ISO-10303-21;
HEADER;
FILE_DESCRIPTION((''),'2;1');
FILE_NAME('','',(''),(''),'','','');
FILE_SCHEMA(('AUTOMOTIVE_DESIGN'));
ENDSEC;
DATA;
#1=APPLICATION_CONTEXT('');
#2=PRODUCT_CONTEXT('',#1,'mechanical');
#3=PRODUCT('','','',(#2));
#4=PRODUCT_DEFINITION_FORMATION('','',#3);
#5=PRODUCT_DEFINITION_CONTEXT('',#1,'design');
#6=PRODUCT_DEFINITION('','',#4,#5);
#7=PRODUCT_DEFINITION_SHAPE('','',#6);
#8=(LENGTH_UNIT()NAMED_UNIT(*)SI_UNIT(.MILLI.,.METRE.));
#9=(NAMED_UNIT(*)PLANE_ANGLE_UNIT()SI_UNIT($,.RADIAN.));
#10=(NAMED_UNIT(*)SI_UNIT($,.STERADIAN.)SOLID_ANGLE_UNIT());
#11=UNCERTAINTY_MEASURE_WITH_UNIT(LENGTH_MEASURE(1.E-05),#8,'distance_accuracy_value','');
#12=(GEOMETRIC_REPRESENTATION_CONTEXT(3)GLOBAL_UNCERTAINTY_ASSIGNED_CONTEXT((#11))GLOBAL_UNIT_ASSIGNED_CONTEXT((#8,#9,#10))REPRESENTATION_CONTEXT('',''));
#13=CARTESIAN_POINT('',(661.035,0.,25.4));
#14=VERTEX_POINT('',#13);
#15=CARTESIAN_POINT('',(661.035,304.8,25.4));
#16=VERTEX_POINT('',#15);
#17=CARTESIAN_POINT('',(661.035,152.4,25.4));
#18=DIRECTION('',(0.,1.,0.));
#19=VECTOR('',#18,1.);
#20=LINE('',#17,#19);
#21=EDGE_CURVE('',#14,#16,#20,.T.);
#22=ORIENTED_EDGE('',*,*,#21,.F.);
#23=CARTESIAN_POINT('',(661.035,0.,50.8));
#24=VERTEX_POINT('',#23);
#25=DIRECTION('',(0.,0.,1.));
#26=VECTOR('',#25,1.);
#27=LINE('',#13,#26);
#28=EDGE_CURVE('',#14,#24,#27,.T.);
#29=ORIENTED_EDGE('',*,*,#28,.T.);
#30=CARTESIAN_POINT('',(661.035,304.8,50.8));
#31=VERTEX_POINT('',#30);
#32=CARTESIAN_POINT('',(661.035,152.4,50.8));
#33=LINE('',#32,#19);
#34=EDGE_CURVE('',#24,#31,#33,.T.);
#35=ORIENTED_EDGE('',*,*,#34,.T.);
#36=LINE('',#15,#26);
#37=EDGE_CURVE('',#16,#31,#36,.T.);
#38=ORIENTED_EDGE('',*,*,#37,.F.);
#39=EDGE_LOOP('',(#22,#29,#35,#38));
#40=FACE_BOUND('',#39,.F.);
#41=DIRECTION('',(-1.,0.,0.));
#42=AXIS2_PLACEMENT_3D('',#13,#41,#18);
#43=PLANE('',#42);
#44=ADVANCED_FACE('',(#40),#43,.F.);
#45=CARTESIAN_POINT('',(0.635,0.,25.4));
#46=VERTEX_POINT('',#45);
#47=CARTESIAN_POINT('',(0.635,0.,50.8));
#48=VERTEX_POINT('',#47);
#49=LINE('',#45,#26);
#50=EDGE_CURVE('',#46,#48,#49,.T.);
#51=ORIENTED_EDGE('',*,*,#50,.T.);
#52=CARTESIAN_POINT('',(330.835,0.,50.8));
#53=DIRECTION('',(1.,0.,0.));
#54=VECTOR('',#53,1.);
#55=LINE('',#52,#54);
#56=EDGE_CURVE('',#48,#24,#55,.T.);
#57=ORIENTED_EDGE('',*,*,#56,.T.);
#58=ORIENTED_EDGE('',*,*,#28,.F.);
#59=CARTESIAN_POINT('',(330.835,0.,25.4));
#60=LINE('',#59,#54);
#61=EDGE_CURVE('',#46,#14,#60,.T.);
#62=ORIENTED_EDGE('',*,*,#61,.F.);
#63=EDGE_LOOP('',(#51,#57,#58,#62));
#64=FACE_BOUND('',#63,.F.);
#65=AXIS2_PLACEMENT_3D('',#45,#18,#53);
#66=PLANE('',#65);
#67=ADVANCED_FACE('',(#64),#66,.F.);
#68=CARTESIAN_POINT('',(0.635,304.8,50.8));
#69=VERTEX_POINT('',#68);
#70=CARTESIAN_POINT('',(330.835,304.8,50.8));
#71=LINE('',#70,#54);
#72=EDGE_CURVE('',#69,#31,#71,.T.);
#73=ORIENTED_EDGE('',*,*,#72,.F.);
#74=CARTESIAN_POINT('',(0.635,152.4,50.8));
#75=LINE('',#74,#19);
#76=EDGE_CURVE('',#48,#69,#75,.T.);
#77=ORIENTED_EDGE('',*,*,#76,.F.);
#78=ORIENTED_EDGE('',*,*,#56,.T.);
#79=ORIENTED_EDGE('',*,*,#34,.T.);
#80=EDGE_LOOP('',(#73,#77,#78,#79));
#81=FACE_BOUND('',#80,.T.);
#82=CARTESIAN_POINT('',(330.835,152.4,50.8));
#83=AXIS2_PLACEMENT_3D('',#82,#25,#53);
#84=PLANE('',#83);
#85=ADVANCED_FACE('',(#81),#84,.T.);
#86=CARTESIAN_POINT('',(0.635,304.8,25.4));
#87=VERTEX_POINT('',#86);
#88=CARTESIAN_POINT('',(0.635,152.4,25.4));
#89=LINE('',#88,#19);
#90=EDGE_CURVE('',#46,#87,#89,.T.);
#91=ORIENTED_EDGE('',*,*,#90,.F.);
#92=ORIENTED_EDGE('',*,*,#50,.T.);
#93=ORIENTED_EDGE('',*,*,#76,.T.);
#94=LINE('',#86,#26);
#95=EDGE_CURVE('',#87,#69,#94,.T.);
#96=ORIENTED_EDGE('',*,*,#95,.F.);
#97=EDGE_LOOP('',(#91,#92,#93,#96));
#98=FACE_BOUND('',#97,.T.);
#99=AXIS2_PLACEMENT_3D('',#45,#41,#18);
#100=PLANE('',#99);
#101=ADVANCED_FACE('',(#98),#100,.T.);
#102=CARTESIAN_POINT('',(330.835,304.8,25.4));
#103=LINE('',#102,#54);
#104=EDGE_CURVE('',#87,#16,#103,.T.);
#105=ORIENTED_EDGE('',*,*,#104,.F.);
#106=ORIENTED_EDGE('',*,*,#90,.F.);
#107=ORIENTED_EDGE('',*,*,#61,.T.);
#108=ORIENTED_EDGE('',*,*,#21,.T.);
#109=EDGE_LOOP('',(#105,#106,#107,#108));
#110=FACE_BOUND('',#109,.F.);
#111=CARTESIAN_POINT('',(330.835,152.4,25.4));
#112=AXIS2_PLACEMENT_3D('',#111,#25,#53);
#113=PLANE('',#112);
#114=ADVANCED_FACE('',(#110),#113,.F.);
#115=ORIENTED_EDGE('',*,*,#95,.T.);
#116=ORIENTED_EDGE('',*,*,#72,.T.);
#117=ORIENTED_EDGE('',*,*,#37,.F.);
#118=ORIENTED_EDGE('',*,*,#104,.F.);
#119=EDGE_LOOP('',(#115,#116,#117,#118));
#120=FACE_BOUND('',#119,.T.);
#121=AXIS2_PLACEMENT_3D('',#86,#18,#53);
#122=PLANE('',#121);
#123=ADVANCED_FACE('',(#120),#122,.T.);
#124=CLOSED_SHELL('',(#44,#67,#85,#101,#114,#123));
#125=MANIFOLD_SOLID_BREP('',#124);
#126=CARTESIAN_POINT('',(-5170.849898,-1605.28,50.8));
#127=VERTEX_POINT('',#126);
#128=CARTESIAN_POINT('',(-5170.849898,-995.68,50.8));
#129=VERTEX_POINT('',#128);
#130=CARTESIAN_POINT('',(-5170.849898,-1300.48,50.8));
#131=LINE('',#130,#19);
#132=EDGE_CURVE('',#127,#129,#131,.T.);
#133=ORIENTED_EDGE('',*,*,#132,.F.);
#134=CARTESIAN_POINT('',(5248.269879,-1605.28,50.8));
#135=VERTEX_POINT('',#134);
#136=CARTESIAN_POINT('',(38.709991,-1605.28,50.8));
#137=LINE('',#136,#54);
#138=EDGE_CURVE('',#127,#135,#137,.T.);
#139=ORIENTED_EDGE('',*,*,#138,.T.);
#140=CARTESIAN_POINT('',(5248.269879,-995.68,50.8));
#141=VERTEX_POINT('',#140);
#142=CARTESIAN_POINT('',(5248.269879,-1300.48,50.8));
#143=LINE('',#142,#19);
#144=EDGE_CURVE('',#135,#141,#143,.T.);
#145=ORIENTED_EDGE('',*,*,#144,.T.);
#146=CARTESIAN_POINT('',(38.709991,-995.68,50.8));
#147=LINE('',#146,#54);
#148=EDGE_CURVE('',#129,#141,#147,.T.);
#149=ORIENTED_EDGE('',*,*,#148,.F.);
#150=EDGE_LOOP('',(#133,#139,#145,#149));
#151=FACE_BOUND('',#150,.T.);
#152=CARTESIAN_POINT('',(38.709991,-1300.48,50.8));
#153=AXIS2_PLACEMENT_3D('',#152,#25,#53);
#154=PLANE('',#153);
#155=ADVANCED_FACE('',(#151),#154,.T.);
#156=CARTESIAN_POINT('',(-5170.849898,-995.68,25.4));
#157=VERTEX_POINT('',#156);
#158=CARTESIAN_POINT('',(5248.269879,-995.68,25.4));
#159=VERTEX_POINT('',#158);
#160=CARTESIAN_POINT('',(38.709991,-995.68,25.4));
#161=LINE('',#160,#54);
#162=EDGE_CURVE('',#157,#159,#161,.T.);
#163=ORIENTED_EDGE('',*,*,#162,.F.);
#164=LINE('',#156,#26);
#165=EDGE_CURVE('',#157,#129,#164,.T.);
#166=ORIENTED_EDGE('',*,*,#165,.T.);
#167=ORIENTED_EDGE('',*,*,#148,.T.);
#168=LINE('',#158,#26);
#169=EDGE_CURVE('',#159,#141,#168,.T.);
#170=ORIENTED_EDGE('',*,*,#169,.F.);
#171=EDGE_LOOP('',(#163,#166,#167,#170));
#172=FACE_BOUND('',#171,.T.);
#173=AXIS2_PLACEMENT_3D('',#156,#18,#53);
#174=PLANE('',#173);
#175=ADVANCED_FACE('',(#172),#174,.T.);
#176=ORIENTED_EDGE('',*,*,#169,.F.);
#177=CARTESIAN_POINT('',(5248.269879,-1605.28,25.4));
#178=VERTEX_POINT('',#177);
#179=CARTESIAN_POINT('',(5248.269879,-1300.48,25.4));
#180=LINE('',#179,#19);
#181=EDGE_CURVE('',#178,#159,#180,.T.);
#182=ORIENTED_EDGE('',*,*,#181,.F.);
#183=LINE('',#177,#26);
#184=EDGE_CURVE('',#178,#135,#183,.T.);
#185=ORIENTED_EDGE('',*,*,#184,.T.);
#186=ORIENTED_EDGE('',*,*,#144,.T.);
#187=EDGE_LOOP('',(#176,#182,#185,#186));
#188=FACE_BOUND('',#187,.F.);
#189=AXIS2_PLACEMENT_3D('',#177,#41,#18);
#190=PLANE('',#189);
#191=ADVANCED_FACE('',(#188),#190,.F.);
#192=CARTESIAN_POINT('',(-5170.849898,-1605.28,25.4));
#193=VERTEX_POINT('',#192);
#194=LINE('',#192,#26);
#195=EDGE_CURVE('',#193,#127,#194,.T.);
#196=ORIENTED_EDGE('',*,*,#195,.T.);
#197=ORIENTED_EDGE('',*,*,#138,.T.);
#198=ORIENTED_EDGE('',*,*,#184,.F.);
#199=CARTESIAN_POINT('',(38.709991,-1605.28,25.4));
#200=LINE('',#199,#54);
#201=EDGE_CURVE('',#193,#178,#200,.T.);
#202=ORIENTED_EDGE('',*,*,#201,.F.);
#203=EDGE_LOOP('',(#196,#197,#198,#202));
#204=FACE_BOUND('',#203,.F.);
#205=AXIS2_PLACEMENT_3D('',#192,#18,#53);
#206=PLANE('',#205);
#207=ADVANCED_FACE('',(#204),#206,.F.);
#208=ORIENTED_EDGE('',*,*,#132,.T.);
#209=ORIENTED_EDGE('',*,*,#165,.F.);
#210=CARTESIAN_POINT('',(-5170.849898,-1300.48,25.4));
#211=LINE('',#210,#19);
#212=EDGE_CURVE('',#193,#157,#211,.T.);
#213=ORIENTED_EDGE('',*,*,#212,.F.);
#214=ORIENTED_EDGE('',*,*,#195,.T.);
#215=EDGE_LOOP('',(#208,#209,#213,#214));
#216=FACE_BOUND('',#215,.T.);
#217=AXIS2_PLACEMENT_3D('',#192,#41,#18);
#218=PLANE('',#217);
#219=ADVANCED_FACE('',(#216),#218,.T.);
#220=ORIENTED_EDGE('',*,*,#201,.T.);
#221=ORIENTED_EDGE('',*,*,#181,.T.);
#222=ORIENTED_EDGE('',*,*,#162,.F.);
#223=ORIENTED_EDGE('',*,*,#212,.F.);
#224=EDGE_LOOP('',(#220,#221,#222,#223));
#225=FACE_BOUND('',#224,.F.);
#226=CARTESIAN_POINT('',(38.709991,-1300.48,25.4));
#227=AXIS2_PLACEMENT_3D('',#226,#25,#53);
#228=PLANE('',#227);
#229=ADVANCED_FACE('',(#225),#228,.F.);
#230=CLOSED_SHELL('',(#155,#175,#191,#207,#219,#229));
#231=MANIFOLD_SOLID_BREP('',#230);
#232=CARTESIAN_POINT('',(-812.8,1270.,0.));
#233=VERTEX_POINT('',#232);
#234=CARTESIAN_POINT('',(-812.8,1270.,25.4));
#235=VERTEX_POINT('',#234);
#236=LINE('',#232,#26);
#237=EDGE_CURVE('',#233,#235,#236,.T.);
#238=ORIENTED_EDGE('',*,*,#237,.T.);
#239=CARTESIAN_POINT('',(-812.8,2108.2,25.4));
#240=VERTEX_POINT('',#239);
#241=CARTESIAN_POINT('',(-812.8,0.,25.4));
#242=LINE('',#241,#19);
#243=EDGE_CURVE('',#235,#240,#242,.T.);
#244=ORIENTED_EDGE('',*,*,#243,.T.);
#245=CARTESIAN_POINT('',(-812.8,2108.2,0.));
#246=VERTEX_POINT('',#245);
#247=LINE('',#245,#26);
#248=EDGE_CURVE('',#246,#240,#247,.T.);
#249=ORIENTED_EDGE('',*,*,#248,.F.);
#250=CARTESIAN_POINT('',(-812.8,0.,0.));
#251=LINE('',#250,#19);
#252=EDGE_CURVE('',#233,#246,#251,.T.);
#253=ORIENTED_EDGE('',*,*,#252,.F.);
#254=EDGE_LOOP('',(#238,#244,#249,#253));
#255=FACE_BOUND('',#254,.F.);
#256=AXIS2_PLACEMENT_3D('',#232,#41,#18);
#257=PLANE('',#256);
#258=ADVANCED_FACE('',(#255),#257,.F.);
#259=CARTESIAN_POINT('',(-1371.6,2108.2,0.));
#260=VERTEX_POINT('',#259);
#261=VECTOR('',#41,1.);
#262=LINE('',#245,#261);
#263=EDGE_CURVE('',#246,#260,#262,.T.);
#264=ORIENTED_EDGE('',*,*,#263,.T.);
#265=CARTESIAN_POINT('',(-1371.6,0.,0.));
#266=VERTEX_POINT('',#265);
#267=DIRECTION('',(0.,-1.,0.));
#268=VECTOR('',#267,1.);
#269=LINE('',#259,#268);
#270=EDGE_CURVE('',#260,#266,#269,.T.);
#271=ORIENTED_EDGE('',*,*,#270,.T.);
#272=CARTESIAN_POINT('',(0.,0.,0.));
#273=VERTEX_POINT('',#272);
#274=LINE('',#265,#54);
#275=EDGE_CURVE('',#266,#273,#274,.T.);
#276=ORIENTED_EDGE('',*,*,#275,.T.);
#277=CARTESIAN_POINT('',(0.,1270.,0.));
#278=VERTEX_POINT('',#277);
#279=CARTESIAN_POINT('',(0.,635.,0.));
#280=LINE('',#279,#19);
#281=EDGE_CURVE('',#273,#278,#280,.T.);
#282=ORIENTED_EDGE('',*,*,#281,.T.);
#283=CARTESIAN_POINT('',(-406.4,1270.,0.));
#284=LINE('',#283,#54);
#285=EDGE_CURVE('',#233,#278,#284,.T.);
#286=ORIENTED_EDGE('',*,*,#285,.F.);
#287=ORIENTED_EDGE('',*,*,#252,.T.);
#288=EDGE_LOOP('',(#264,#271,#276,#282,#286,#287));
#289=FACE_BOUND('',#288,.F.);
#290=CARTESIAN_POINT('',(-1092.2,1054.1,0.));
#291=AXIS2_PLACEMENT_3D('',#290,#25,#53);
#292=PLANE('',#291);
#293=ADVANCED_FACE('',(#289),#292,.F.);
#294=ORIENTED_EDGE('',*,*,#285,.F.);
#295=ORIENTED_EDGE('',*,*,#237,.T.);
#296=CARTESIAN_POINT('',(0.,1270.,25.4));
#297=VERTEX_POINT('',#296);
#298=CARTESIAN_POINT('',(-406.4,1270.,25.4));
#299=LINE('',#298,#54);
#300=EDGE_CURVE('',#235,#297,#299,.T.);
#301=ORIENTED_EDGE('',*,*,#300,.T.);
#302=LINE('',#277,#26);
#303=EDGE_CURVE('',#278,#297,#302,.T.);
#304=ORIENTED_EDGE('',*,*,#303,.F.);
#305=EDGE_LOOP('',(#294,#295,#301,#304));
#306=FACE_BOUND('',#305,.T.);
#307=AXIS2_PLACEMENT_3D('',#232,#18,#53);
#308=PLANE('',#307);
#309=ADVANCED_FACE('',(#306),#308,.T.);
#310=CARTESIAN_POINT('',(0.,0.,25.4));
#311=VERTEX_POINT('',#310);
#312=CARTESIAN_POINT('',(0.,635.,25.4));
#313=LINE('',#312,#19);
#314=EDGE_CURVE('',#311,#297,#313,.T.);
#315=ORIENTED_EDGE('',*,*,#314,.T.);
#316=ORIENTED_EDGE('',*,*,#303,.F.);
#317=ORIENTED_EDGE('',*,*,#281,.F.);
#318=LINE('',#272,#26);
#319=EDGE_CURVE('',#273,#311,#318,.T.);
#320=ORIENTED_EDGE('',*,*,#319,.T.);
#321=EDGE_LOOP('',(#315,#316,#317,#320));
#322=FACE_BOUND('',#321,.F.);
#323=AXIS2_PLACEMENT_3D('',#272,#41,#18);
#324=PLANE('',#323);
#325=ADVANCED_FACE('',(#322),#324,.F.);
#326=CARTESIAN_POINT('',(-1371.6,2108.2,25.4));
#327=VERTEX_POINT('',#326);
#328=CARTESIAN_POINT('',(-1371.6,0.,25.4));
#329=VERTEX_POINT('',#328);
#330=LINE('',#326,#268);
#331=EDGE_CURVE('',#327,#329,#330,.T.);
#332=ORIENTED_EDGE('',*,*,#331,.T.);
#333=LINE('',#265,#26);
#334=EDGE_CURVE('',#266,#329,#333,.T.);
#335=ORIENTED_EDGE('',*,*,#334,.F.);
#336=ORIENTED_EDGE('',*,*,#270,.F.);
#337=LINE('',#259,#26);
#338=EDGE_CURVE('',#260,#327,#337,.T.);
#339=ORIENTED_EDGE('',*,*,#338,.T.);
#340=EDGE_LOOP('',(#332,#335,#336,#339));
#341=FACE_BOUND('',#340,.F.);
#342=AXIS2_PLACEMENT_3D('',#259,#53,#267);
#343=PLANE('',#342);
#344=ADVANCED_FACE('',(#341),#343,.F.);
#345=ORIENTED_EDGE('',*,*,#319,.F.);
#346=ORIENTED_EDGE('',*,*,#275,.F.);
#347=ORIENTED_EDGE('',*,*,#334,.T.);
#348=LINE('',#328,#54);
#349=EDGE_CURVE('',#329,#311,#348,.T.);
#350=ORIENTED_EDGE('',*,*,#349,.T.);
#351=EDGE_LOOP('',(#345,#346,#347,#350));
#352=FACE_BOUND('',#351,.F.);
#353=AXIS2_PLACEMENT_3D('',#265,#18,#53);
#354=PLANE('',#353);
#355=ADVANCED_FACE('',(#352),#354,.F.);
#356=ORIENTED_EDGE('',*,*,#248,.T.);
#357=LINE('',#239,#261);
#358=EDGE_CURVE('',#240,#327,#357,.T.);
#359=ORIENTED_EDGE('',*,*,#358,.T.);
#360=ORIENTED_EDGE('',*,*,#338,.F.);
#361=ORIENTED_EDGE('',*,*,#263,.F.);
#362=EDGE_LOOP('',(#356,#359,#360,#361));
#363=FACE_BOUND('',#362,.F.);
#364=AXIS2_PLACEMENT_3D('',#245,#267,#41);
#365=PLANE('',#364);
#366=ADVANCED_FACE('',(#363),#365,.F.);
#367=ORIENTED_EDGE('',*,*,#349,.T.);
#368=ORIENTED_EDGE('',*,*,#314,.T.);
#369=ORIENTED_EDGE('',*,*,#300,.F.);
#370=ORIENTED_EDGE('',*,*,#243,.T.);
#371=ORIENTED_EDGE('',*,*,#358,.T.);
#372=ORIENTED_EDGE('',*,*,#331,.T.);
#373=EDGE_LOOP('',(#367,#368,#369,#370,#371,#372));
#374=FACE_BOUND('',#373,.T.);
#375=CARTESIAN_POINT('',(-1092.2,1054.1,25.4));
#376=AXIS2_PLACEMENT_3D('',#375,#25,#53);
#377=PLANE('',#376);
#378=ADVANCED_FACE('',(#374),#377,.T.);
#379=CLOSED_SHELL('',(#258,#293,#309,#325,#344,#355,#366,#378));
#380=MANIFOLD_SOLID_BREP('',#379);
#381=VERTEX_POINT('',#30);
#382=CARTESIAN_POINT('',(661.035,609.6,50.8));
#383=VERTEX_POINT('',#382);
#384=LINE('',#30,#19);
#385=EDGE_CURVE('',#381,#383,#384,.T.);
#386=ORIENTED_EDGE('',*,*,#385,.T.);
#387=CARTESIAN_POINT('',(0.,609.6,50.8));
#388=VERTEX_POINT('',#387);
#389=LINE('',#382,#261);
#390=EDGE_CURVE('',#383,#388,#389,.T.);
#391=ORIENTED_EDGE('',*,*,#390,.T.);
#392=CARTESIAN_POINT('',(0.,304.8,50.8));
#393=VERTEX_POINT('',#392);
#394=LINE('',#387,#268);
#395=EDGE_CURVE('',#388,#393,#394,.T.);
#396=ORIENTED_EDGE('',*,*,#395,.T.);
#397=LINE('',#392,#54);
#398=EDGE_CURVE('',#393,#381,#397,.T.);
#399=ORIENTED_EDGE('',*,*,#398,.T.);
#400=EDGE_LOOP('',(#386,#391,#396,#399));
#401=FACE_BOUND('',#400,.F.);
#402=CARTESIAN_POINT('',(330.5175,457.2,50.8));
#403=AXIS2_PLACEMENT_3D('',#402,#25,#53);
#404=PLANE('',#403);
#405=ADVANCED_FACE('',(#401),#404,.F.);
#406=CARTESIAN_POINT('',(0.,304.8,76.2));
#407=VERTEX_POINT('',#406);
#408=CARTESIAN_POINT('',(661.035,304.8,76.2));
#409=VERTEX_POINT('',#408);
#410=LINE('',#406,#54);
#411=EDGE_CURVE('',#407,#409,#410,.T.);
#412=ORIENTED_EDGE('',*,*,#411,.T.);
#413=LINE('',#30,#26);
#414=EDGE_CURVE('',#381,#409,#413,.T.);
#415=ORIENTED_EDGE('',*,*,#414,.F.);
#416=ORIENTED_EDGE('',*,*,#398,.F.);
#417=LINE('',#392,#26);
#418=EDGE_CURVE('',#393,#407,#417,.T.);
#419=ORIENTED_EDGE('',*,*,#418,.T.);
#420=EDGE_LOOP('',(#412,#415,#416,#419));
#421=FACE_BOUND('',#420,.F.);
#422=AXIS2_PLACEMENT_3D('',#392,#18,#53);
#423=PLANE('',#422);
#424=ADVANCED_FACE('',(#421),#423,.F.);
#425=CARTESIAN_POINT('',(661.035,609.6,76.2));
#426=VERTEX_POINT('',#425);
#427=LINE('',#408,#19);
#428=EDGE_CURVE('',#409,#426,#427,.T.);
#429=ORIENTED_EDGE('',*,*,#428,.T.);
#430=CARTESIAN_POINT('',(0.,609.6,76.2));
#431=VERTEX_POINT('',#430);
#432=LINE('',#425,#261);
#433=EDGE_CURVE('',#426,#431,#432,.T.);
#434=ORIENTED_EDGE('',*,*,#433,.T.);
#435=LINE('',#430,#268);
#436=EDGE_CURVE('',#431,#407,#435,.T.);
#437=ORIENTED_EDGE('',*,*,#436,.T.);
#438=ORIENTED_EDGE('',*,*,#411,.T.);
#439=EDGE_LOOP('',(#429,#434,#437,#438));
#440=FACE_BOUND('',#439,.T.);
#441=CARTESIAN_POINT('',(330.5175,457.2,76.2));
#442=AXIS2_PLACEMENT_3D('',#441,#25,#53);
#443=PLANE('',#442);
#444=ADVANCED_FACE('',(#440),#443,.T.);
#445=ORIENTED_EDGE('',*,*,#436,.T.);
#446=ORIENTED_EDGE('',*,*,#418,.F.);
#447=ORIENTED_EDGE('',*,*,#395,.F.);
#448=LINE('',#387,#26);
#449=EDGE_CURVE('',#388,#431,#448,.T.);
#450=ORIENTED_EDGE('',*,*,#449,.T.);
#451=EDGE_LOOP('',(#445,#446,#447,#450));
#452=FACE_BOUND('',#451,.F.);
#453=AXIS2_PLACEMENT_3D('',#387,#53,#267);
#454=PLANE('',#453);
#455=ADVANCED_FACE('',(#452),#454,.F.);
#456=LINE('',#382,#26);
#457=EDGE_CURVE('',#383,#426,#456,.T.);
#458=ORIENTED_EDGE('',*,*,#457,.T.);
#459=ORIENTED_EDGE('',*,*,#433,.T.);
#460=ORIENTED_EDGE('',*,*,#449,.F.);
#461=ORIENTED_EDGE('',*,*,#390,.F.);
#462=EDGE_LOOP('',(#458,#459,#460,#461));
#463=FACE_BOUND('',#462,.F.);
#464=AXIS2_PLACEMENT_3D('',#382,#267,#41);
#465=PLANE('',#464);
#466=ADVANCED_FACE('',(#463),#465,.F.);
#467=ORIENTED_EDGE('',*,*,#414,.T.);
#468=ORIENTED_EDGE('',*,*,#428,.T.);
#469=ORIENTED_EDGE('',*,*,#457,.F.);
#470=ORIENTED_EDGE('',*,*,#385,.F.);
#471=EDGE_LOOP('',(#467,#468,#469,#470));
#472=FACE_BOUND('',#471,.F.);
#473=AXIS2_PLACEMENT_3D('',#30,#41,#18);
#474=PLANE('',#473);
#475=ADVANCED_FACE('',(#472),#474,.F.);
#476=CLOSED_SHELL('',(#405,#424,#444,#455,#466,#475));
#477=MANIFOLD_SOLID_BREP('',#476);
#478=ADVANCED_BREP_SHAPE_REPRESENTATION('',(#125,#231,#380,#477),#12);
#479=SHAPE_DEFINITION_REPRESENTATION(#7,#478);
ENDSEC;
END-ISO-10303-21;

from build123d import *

# Parameters (mm, degrees)
F0_W     = 812.8
F0_H     = 1270
F1_DEPTH = 25.4
F2_W     = 660.4
F2_H     = 304.8
F3_DEPTH = 25.4
F4_W     = 10419.1197770573
F4_H     = 609.6
F5_DEPTH = 25.4
F7_DEPTH = 25.4


# Not quite as in the source:
# - a feature names something its author has since deleted; it is built from what else it names


with BuildPart() as f1:
    # F0 (on Top) → F1 (new body)
    with BuildSketch(Plane.XY):
        Polygon((-1371.6, 0), (-812.8, 0), (-812.8, 1270), (-812.8, 2108.2), (-1371.6, 2108.2), align=None)
        with Locations((-406.4, 635)):
            Rectangle(F0_W, F0_H)
    extrude(amount=F1_DEPTH)


with BuildPart() as f3:
    # F2 (on face) → F3 (new body)
    with BuildSketch(Plane.XY.offset(25.4)):
        with Locations((330.835, 152.4)):
            Rectangle(F2_W, F2_H)
    extrude(amount=F3_DEPTH)


with BuildPart() as f5:
    # F4 (on face) → F5 (new body)
    with BuildSketch(Plane.XY.offset(25.4)):
        with Locations((38.7099906802, -1300.48)):
            Rectangle(F4_W, F4_H)
    extrude(amount=F5_DEPTH)


with BuildPart() as f7:
    # F6 (on face) → F7 (new body)
    with BuildSketch(Plane.XY.offset(50.8)):
        Polygon((0.635, 304.8), (661.035, 304.8), (661.035, 609.6), (0, 609.6), (0, 304.8), align=None)
    extrude(amount=F7_DEPTH)


solid = Compound([f1.part, f3.part, f5.part, f7.part])
